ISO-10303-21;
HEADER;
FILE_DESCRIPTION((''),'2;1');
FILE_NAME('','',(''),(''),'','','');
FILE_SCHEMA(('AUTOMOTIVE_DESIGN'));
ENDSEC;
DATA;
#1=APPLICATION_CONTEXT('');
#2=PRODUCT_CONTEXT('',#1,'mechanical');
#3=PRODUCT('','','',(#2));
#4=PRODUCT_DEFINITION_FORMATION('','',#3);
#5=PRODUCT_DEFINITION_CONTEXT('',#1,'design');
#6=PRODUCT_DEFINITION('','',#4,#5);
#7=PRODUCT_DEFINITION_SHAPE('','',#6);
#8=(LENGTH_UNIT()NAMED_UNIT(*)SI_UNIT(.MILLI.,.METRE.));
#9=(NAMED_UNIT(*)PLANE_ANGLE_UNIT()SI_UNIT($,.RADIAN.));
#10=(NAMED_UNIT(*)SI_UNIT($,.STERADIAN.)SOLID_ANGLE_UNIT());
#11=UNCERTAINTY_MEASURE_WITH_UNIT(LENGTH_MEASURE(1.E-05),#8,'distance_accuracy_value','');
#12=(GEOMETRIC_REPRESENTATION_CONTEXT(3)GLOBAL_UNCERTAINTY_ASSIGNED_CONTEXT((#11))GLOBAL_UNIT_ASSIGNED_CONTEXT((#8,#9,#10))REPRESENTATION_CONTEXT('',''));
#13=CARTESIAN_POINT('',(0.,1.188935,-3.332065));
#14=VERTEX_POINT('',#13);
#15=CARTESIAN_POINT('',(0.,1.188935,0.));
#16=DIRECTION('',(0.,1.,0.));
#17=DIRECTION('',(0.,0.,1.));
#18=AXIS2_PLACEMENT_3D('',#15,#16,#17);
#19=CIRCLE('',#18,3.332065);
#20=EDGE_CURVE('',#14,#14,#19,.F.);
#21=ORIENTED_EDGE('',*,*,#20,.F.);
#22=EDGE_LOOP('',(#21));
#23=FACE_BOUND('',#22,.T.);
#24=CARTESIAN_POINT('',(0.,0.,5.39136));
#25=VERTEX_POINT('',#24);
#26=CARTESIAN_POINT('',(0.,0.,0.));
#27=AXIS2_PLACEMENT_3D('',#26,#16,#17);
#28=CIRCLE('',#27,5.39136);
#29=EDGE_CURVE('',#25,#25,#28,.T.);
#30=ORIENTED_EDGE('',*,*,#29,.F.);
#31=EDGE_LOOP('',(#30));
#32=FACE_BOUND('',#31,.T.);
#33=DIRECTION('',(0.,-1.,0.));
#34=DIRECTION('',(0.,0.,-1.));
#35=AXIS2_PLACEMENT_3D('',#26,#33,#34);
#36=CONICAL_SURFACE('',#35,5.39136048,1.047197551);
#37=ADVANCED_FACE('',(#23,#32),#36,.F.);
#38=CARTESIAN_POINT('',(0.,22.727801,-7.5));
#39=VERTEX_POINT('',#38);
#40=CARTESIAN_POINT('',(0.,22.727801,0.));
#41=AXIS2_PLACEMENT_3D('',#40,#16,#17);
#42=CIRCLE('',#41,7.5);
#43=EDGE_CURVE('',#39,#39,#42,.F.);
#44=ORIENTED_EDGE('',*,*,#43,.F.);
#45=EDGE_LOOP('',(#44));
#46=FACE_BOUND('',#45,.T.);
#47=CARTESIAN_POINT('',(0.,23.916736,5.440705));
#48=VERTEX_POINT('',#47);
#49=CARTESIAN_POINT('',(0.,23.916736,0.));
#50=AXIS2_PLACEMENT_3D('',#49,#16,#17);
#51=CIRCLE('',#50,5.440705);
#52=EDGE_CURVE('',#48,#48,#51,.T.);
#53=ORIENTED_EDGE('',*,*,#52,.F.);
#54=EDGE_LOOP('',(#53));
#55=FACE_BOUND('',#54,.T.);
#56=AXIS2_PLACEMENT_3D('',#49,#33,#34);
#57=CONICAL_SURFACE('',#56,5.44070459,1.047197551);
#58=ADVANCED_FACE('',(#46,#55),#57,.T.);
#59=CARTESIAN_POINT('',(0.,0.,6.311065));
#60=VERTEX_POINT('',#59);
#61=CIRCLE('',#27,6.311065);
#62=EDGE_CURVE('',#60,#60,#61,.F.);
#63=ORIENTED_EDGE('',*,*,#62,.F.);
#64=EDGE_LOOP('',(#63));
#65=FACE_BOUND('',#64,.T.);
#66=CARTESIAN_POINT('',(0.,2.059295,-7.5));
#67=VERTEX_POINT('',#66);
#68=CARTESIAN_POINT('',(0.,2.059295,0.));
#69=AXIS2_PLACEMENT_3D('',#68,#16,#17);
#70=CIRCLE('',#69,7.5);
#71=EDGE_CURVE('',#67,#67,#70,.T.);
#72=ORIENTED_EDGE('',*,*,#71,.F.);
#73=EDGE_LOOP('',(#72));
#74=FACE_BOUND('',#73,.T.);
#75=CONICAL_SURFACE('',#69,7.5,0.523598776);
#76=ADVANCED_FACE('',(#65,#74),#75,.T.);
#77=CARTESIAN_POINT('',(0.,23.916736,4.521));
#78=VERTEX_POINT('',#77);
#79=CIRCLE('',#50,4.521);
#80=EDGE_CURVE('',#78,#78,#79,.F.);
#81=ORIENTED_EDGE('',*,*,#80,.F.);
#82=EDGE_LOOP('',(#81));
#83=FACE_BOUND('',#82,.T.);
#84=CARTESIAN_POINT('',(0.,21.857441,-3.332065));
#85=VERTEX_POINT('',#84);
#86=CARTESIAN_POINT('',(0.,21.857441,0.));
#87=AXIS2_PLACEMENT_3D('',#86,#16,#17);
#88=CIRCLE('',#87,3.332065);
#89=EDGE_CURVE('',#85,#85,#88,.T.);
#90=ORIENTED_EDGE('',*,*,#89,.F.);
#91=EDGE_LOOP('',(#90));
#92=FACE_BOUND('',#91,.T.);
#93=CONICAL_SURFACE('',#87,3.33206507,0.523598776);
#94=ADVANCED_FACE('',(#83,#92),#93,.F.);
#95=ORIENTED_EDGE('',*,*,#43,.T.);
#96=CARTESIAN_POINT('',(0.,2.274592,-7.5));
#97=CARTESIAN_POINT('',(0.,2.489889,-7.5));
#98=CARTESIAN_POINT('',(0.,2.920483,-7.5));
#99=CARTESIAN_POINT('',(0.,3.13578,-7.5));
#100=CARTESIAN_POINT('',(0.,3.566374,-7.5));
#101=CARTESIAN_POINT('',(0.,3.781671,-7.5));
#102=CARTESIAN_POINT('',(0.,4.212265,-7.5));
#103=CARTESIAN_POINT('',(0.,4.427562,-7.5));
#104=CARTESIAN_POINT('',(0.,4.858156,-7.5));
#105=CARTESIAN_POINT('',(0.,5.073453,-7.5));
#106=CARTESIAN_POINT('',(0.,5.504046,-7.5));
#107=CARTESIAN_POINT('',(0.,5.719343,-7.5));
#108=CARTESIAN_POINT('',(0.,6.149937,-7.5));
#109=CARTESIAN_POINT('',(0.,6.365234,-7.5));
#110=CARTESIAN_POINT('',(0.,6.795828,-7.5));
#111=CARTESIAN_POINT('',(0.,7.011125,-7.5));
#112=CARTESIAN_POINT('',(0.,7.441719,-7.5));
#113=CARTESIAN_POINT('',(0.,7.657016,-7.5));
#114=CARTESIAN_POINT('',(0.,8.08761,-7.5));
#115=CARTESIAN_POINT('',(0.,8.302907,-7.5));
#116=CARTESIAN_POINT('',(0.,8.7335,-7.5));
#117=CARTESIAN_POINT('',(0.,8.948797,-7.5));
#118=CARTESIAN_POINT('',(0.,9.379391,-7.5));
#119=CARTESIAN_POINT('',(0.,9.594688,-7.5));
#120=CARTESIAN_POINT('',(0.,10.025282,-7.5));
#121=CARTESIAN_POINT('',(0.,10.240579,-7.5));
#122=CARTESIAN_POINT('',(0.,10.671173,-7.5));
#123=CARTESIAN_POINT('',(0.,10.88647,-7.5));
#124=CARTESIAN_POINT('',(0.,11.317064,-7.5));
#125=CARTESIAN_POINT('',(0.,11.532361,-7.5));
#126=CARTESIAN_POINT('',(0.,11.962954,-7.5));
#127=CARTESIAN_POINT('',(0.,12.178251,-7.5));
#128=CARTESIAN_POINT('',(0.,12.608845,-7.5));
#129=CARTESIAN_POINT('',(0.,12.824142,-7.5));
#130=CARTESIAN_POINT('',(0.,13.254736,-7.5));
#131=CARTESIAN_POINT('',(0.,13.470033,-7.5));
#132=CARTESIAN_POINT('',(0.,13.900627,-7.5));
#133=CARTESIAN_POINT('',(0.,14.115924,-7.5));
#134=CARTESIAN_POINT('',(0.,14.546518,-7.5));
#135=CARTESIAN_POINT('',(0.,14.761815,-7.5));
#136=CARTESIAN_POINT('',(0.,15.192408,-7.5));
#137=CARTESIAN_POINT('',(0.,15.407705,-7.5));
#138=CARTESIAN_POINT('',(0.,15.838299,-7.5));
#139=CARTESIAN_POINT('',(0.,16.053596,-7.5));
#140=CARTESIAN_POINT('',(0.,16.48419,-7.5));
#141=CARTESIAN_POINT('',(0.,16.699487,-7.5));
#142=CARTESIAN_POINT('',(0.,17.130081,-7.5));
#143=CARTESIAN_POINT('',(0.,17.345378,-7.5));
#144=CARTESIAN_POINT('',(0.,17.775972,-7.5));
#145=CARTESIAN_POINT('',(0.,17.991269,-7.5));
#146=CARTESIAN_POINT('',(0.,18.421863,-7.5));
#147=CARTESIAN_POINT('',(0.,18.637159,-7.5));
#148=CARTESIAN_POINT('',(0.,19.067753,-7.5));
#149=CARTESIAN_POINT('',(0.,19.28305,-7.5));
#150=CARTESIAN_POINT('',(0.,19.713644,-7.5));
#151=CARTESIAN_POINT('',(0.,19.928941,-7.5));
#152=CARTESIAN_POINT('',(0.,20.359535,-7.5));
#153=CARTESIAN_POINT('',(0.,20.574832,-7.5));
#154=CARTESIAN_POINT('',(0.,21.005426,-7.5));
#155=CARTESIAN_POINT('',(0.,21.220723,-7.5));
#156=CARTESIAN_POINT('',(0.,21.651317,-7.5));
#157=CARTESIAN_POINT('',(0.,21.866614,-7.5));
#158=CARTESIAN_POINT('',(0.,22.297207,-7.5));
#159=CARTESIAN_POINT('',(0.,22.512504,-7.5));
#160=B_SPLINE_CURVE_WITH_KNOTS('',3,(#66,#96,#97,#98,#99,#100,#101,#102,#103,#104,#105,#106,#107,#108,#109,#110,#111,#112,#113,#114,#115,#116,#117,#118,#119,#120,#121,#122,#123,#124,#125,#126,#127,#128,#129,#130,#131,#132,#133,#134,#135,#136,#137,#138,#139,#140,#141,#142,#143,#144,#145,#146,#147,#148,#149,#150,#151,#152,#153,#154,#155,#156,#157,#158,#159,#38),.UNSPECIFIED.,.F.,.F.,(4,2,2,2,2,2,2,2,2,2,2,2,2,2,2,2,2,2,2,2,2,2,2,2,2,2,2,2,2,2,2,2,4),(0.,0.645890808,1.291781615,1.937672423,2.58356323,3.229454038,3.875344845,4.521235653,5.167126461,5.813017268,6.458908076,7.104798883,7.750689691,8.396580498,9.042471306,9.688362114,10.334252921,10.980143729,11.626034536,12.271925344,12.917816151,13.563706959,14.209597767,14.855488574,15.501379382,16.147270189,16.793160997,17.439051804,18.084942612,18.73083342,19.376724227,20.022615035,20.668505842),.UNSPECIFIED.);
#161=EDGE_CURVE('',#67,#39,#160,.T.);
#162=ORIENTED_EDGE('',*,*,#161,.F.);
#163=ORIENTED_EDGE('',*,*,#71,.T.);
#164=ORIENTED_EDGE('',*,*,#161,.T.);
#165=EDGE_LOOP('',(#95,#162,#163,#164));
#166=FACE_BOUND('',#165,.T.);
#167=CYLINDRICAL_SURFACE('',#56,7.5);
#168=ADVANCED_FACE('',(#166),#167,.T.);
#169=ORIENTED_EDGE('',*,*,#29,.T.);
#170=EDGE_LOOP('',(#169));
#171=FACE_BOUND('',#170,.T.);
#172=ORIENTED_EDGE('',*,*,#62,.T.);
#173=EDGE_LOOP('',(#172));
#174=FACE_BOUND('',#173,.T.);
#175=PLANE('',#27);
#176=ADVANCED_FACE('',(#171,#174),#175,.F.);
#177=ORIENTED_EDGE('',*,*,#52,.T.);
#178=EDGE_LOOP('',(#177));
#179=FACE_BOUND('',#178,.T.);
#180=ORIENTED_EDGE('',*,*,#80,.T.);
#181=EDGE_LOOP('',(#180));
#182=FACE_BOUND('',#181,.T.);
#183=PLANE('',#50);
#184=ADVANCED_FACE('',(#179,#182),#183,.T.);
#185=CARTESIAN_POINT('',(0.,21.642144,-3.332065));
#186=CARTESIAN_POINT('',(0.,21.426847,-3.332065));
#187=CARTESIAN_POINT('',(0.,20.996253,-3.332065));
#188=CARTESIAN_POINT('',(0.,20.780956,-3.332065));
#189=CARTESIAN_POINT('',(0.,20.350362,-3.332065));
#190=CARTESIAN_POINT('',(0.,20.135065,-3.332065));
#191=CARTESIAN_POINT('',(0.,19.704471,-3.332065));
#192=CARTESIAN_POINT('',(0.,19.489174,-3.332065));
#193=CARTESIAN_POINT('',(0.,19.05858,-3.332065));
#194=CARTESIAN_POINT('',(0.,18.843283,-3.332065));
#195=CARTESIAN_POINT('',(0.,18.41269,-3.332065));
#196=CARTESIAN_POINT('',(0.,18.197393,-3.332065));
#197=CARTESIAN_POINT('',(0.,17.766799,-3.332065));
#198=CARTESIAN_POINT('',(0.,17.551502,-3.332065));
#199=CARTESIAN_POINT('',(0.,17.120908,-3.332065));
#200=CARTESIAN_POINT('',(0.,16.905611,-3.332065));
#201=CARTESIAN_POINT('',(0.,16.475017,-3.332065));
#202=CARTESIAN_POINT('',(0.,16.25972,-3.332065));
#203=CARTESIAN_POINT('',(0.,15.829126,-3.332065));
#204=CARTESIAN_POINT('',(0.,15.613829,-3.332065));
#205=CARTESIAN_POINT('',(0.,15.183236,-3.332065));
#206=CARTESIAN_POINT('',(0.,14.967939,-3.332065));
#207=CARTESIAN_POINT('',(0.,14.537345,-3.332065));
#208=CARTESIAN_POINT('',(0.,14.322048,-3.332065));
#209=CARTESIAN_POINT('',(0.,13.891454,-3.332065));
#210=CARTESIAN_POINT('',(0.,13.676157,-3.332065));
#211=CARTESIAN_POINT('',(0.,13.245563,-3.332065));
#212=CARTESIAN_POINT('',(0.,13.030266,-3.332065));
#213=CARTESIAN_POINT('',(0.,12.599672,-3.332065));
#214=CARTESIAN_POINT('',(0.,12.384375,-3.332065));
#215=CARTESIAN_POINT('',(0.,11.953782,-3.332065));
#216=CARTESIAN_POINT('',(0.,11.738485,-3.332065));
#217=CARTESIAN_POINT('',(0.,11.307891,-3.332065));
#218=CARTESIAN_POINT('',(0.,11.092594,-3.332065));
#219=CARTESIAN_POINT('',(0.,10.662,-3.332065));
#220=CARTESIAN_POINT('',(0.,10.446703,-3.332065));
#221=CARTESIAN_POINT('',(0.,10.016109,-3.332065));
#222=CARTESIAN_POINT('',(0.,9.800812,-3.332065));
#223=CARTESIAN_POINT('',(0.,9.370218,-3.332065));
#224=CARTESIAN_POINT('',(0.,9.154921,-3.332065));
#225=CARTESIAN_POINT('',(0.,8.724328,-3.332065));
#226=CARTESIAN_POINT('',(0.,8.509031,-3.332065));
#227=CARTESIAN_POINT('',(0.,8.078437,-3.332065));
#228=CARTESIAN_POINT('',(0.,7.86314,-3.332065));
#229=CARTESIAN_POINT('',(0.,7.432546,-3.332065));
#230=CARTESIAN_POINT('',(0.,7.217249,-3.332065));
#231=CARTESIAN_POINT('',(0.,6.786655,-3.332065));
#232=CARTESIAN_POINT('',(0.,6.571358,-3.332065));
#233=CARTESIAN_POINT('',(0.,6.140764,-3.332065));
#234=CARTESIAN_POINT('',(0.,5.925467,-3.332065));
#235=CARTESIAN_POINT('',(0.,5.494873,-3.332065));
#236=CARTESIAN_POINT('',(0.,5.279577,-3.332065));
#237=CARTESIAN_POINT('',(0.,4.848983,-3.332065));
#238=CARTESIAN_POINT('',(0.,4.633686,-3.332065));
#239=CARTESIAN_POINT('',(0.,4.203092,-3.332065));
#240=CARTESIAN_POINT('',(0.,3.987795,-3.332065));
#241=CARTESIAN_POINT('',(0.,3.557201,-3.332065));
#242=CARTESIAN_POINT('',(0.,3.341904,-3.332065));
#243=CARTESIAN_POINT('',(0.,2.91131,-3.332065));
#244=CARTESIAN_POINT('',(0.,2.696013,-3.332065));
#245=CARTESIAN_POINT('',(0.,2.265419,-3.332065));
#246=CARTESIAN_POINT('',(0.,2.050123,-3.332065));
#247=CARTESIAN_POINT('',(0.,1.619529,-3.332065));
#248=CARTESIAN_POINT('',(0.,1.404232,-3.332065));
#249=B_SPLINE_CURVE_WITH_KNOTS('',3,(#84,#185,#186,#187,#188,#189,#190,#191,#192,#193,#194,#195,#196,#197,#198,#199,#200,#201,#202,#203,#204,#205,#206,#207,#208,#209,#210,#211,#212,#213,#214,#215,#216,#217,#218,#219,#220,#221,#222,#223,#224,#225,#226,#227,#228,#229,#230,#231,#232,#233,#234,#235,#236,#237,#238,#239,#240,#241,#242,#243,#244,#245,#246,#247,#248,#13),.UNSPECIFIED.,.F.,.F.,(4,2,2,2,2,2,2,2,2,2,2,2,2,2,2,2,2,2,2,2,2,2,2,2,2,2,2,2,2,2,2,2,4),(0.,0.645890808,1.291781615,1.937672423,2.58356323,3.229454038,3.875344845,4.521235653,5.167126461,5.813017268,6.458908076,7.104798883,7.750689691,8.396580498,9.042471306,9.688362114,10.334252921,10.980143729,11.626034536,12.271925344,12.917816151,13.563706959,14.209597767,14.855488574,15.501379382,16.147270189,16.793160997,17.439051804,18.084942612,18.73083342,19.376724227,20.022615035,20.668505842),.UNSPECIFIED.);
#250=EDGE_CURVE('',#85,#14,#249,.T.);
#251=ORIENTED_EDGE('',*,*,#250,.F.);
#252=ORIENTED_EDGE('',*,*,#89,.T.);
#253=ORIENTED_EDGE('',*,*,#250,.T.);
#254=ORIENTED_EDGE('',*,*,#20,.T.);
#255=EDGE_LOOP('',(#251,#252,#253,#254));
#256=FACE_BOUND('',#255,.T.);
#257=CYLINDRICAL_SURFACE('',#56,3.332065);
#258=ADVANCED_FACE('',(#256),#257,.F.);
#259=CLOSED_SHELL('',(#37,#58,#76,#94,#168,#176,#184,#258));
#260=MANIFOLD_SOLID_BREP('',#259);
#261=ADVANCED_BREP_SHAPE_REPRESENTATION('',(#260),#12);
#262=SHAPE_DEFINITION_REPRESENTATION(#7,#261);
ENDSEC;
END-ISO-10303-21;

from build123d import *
from OCP.BRepFilletAPI import BRepFilletAPI_MakeChamfer

# Parameters (mm, degrees)
SKETCH1_R           = 7.5
BOSS_EXTRUDE1_DEPTH = 23.916736011
SKETCH2_R           = 3.33206507
CUT_EXTRUDE1_DEPTH  = 27.163147009
CHAMFER1_SIZE       = 1.188934759
CHAMFER1_SIZE2      = 2.05929541


with BuildPart() as part:
    # Sketch1 → Boss-Extrude1 (new body)
    with BuildSketch(Plane(origin=(0, 0, 0), x_dir=(1, 0, 0), z_dir=(0, 1, 0))):
        Circle(SKETCH1_R)
    extrude(amount=BOSS_EXTRUDE1_DEPTH)

    # Sketch2 → Cut-Extrude1 (cut, through all)
    with BuildSketch(Plane(origin=(0, 0, 0), x_dir=(1, 0, 0), z_dir=(0, 1, 0))):
        Circle(SKETCH2_R)
    extrude(amount=CUT_EXTRUDE1_DEPTH, mode=Mode.SUBTRACT)

    # Chamfer1: one chamfer whose edges measure the first distance from different faces: ONE call of the kernel's chamfer builder (chamfer() names one face for all edges)
    chamfer1_edges_1 = [part.edges().sort_by_distance(p)[0] for p in [
        (-3.33206507, 23.916736011, 0),
    ]]
    chamfer1_side_1 = [part.faces().sort_by_distance(p)[0] for p in [
        (-7.287867966, 23.916736011, 0),
    ]]
    chamfer1_edges_2 = [part.edges().sort_by_distance(p)[0] for p in [
        (-3.33206507, 0, 0),
    ]]
    chamfer1_side_2 = [part.faces().sort_by_distance(p)[0] for p in [
        (-3.33206507, 11.958368006, 0),
    ]]
    chamfer1_edges_3 = [part.edges().sort_by_distance(p)[0] for p in [
        (-7.5, 0, 0),
    ]]
    chamfer1_side_3 = [part.faces().sort_by_distance(p)[0] for p in [
        (-7.287867966, 0, 0),
    ]]
    chamfer1_edges_4 = [part.edges().sort_by_distance(p)[0] for p in [
        (-7.5, 23.916736011, 0),
    ]]
    chamfer1_side_4 = [part.faces().sort_by_distance(p)[0] for p in [
        (-7.5, 11.958368006, 0),
    ]]
    chamfer1 = BRepFilletAPI_MakeChamfer(part.part.solid().wrapped)
    for e in chamfer1_edges_1:
        chamfer1.Add(CHAMFER1_SIZE, CHAMFER1_SIZE2, e.wrapped, chamfer1_side_1[0].wrapped)  # the first distance lies on this face
    for e in chamfer1_edges_2:
        chamfer1.Add(CHAMFER1_SIZE, CHAMFER1_SIZE2, e.wrapped, chamfer1_side_2[0].wrapped)  # the first distance lies on this face
    for e in chamfer1_edges_3:
        chamfer1.Add(CHAMFER1_SIZE, CHAMFER1_SIZE2, e.wrapped, chamfer1_side_3[0].wrapped)  # the first distance lies on this face
    for e in chamfer1_edges_4:
        chamfer1.Add(CHAMFER1_SIZE, CHAMFER1_SIZE2, e.wrapped, chamfer1_side_4[0].wrapped)  # the first distance lies on this face
    add(Compound.cast(chamfer1.Shape()), mode=Mode.REPLACE)


solid = part.part
